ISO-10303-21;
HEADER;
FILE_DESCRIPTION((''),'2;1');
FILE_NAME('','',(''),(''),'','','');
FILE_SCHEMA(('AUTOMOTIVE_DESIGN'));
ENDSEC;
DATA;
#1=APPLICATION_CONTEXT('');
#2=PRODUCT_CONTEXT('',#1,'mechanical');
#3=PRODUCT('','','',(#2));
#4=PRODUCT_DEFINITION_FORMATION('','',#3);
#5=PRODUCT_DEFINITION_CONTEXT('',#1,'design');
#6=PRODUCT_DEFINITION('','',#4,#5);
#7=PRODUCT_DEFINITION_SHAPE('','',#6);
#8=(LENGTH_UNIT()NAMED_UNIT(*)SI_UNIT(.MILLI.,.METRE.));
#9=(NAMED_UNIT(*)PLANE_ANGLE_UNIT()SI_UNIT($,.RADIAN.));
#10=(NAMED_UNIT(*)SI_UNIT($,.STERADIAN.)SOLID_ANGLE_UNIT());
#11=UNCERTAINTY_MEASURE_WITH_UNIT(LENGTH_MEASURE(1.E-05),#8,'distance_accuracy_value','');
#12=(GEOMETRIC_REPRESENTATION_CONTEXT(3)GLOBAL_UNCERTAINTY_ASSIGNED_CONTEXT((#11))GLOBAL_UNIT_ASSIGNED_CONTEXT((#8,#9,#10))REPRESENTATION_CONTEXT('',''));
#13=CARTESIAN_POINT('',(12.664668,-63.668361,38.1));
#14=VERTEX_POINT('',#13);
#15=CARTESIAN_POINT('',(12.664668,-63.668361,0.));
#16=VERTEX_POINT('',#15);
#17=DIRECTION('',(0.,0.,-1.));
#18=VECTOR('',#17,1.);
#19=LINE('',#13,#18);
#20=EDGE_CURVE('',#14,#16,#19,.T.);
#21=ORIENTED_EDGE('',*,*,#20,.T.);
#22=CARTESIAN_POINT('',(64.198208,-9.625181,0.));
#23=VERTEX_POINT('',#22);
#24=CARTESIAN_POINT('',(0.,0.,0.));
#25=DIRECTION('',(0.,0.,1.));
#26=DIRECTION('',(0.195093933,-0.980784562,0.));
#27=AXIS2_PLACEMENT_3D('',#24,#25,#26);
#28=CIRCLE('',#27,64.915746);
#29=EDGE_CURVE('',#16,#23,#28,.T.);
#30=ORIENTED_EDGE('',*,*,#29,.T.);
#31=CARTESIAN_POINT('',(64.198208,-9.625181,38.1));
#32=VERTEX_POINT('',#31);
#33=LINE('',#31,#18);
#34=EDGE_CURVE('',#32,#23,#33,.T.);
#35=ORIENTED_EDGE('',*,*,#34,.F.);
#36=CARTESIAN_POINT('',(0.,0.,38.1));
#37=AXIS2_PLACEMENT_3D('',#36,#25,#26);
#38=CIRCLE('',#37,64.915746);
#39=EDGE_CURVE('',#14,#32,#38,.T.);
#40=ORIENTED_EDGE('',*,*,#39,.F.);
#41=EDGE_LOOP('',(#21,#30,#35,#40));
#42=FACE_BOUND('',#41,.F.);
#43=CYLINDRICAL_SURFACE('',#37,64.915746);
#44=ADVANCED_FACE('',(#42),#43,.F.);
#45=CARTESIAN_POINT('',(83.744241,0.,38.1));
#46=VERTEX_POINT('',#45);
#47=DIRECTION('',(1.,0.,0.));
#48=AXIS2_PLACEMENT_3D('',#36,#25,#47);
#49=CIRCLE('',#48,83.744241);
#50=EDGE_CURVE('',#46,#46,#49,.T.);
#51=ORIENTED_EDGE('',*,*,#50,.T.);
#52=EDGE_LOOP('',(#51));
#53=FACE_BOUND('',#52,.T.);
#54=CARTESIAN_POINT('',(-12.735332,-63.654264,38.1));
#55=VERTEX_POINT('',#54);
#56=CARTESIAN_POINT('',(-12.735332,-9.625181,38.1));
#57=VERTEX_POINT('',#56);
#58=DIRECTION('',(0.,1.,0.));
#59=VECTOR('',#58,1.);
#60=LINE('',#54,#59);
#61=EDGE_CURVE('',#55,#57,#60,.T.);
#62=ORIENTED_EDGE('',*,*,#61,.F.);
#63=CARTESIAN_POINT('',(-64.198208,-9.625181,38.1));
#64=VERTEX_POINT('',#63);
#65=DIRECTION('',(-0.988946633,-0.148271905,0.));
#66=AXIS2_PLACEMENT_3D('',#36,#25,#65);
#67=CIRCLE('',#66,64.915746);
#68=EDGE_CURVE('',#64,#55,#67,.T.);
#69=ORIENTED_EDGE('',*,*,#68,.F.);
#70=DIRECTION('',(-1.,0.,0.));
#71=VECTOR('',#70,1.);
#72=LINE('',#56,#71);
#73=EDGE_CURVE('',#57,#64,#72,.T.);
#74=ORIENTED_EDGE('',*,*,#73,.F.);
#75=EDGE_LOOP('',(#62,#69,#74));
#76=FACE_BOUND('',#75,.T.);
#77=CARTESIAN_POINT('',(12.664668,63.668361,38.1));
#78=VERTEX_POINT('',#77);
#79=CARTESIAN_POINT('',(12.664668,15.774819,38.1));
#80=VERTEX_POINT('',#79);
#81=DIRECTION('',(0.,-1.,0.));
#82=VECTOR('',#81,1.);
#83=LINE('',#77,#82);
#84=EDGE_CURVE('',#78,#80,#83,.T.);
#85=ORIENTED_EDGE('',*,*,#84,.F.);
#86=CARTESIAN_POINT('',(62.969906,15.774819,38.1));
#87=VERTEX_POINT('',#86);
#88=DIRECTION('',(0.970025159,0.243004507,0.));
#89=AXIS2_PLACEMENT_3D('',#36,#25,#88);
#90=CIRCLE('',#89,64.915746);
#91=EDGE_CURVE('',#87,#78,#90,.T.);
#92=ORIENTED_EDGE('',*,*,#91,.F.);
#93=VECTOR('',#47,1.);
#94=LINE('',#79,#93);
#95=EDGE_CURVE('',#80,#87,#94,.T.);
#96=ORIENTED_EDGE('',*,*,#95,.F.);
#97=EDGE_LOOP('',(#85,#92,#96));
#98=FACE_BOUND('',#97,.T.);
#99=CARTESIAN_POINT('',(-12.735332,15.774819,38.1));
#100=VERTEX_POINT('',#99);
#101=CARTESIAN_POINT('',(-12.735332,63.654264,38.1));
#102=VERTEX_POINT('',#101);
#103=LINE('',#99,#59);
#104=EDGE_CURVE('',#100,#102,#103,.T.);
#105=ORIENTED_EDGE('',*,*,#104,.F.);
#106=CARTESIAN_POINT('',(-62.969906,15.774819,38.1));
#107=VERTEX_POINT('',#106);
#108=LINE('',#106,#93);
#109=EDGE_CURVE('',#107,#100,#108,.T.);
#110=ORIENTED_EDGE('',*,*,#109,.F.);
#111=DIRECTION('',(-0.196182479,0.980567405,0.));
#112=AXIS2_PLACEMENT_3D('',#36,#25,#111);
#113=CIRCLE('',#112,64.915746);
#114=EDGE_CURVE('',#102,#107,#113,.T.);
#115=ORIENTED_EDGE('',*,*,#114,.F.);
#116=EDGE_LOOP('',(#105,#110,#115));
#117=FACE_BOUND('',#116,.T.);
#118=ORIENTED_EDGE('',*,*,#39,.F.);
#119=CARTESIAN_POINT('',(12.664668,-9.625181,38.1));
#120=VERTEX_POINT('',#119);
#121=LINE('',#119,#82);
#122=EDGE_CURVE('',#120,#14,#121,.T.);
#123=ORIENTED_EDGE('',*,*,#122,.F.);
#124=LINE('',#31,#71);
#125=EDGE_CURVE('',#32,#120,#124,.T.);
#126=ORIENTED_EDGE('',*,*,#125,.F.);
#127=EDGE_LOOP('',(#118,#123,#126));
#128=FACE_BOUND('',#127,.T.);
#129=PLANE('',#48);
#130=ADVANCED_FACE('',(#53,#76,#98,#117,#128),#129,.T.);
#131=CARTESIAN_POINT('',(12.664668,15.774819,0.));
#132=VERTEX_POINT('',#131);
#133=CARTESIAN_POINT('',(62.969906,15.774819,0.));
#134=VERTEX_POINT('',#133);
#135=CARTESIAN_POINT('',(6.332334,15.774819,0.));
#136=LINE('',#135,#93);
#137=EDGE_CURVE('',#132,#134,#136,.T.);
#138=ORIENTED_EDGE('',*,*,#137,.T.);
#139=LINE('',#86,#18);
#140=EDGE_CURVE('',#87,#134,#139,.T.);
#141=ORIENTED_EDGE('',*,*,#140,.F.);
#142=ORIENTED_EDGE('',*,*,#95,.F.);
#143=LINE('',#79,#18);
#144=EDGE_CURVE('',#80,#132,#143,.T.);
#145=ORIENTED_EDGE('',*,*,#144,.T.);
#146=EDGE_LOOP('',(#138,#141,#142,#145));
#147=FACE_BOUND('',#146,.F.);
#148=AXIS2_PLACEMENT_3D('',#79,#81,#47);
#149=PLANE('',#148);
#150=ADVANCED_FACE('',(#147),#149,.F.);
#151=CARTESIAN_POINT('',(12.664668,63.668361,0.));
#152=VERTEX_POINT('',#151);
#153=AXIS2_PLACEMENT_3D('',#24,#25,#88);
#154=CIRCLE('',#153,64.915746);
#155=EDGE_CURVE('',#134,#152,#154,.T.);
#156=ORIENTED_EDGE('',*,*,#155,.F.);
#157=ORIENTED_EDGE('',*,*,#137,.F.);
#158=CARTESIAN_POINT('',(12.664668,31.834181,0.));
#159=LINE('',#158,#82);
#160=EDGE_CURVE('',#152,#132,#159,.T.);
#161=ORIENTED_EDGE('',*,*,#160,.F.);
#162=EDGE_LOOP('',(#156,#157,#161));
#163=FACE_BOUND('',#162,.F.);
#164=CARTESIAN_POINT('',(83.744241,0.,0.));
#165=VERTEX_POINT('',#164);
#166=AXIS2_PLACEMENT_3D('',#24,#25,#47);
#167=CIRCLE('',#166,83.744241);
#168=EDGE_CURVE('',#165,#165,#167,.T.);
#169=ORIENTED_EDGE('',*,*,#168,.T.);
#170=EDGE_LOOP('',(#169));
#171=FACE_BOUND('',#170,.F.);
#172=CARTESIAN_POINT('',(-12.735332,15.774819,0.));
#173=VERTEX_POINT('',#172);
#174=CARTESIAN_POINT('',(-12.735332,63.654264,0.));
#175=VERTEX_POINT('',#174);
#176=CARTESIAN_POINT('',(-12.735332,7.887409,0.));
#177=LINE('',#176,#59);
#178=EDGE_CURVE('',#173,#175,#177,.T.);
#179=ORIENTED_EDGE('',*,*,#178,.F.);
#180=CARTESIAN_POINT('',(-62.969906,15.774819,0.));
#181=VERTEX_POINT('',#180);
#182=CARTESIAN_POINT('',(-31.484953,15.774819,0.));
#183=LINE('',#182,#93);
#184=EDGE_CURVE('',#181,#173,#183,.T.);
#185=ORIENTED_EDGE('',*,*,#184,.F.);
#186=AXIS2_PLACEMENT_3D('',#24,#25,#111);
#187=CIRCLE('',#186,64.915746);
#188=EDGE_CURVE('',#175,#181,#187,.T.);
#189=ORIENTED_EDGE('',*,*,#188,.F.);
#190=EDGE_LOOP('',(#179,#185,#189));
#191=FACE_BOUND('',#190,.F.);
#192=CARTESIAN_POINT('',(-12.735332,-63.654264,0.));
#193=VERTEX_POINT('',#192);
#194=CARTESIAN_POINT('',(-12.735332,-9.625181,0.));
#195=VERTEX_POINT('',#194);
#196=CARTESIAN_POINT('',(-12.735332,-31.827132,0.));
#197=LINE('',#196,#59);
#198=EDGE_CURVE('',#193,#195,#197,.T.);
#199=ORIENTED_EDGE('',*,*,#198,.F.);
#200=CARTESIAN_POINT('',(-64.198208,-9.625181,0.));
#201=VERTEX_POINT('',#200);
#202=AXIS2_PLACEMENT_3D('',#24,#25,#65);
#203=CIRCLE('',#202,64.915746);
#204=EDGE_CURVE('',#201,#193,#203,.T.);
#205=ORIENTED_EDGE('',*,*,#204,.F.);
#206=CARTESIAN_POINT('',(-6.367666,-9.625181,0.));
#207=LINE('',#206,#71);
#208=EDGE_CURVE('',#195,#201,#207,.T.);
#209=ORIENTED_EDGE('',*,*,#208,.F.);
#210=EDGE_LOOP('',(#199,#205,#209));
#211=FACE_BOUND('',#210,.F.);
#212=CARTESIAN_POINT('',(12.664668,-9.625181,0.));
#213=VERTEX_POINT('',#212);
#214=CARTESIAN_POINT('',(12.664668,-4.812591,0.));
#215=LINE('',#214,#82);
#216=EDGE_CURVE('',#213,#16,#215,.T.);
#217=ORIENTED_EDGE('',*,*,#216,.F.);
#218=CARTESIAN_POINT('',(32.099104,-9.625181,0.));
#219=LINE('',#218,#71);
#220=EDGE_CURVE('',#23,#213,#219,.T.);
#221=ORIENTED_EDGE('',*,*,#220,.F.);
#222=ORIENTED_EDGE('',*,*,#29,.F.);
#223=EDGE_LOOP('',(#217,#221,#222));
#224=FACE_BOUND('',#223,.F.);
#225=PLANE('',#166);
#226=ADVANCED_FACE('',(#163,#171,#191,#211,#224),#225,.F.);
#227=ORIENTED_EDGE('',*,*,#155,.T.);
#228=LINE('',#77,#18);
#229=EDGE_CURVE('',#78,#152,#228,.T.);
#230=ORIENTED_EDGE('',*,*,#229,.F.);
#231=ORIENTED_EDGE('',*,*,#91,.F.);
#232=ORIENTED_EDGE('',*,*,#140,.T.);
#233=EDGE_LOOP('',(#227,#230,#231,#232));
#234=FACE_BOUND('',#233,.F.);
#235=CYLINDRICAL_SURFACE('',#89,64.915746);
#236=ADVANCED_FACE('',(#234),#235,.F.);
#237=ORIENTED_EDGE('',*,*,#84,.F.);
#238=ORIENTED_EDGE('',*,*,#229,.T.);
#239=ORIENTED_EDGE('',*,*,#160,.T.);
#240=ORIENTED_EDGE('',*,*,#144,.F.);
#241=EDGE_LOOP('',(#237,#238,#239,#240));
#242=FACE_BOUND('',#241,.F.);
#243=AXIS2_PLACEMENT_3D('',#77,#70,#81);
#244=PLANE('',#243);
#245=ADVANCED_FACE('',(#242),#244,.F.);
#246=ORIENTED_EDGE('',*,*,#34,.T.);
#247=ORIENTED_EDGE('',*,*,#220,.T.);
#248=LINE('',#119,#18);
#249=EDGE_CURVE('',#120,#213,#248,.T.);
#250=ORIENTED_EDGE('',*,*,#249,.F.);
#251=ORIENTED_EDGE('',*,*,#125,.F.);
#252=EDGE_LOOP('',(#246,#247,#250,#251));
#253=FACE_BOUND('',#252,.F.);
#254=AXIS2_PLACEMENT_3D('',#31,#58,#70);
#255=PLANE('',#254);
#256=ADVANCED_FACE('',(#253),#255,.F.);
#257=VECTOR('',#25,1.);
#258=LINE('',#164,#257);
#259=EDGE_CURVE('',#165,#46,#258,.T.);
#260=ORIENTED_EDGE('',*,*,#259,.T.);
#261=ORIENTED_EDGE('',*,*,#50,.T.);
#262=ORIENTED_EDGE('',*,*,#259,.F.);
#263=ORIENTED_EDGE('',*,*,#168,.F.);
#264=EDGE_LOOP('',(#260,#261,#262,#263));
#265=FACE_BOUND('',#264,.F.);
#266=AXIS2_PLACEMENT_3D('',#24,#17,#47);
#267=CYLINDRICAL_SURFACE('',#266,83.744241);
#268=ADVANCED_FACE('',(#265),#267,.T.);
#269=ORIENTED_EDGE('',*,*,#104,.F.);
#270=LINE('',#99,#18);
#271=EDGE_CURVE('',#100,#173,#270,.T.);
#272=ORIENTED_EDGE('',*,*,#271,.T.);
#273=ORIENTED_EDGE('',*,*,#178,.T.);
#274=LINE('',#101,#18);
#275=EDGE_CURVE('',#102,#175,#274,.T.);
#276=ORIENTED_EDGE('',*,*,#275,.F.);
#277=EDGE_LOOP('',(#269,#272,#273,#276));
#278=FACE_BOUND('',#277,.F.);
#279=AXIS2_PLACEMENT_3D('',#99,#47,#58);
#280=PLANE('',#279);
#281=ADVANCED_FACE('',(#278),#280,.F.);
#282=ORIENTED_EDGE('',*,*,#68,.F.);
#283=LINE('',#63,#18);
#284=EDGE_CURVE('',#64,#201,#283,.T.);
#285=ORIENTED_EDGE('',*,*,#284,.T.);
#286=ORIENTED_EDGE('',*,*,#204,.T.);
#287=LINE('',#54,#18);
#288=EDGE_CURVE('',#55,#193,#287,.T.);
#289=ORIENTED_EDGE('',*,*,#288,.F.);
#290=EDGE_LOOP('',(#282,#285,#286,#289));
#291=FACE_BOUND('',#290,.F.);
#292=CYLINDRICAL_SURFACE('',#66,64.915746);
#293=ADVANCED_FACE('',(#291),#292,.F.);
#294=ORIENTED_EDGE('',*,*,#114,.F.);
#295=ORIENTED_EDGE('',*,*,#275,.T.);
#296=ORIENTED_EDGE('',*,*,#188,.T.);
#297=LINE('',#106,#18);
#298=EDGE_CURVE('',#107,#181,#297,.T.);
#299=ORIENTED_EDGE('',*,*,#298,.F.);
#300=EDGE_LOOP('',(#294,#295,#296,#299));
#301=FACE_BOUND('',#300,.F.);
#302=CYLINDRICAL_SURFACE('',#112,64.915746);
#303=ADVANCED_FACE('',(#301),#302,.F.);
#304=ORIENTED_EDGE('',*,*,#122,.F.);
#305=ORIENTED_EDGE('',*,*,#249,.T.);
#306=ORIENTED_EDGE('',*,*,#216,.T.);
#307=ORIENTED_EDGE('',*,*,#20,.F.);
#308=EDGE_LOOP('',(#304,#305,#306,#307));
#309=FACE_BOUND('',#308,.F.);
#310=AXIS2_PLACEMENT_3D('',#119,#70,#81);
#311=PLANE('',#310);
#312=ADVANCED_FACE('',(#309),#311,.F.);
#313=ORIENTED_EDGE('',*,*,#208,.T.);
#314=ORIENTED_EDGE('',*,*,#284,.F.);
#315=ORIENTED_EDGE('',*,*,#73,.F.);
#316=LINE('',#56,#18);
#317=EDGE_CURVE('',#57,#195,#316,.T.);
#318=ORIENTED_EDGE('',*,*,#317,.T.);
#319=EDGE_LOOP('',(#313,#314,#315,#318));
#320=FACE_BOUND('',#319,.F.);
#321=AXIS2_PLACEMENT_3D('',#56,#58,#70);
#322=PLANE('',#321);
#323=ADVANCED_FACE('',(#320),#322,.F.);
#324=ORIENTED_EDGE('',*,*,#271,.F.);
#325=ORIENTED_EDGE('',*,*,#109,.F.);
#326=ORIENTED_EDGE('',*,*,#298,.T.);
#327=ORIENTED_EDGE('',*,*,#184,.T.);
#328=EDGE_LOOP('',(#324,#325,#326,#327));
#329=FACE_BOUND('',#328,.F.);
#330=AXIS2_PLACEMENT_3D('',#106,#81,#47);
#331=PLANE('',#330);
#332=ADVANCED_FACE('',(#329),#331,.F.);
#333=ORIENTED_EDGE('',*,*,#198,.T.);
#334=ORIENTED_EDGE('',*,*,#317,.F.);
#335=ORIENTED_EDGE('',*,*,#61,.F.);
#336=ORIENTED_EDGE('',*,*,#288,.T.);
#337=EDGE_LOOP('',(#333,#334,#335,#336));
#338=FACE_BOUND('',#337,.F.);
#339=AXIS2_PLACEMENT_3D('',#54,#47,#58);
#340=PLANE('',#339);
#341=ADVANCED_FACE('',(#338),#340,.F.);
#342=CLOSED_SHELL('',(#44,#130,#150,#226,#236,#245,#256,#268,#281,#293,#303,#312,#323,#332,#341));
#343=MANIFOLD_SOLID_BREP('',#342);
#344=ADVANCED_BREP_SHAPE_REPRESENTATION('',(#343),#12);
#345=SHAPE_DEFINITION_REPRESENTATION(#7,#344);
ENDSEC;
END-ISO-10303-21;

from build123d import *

# Parameters (mm, degrees)
F0_R     = 83.7442407906
F1_DEPTH = 38.1
F3_DEPTH = 50.8


with BuildPart() as f1:
    # F0 (on Top) → F1 (new body)
    with BuildSketch(Plane.XY):
        Circle(F0_R)
    extrude(amount=F1_DEPTH)

    # F2 (on face) → F3 (cut)
    with BuildSketch(Plane.XY.offset(38.1)):
        with BuildLine():
            Line((12.6646681265, 15.7748187695), (62.9699063944, 15.7748187695))
            ThreePointArc((62.9699063944, 15.7748187695), (44.7615355408, 47.0155182314), (12.6646681265, 63.6683610578))
            Line((12.6646681265, 63.6683610578), (12.6646681265, 15.7748187695))
        make_face()
        with BuildLine():
            ThreePointArc((12.6646681265, -63.6683610578), (46.9802272386, -44.7985743874), (64.1982079564, -9.6251812305))
            Line((64.1982079564, -9.6251812305), (12.6646681265, -9.6251812305))
            Line((12.6646681265, -9.6251812305), (12.6646681265, -63.6683610578))
        make_face()
        with BuildLine():
            Line((-12.7353318735, 15.7748187695), (-12.7353318735, 63.6542641196))
            ThreePointArc((-12.7353318735, 63.6542641196), (-44.7876221412, 46.990668451), (-62.9699063944, 15.7748187695))
            Line((-62.9699063944, 15.7748187695), (-12.7353318735, 15.7748187695))
        make_face()
        with BuildLine():
            ThreePointArc((-64.1982079564, -9.6251812305), (-47.0050830991, -44.7724935801), (-12.7353318735, -63.6542641196))
            Line((-12.7353318735, -63.6542641196), (-12.7353318735, -9.6251812305))
            Line((-12.7353318735, -9.6251812305), (-64.1982079564, -9.6251812305))
        make_face()
    extrude(amount=-F3_DEPTH, mode=Mode.SUBTRACT)


solid = f1.part
